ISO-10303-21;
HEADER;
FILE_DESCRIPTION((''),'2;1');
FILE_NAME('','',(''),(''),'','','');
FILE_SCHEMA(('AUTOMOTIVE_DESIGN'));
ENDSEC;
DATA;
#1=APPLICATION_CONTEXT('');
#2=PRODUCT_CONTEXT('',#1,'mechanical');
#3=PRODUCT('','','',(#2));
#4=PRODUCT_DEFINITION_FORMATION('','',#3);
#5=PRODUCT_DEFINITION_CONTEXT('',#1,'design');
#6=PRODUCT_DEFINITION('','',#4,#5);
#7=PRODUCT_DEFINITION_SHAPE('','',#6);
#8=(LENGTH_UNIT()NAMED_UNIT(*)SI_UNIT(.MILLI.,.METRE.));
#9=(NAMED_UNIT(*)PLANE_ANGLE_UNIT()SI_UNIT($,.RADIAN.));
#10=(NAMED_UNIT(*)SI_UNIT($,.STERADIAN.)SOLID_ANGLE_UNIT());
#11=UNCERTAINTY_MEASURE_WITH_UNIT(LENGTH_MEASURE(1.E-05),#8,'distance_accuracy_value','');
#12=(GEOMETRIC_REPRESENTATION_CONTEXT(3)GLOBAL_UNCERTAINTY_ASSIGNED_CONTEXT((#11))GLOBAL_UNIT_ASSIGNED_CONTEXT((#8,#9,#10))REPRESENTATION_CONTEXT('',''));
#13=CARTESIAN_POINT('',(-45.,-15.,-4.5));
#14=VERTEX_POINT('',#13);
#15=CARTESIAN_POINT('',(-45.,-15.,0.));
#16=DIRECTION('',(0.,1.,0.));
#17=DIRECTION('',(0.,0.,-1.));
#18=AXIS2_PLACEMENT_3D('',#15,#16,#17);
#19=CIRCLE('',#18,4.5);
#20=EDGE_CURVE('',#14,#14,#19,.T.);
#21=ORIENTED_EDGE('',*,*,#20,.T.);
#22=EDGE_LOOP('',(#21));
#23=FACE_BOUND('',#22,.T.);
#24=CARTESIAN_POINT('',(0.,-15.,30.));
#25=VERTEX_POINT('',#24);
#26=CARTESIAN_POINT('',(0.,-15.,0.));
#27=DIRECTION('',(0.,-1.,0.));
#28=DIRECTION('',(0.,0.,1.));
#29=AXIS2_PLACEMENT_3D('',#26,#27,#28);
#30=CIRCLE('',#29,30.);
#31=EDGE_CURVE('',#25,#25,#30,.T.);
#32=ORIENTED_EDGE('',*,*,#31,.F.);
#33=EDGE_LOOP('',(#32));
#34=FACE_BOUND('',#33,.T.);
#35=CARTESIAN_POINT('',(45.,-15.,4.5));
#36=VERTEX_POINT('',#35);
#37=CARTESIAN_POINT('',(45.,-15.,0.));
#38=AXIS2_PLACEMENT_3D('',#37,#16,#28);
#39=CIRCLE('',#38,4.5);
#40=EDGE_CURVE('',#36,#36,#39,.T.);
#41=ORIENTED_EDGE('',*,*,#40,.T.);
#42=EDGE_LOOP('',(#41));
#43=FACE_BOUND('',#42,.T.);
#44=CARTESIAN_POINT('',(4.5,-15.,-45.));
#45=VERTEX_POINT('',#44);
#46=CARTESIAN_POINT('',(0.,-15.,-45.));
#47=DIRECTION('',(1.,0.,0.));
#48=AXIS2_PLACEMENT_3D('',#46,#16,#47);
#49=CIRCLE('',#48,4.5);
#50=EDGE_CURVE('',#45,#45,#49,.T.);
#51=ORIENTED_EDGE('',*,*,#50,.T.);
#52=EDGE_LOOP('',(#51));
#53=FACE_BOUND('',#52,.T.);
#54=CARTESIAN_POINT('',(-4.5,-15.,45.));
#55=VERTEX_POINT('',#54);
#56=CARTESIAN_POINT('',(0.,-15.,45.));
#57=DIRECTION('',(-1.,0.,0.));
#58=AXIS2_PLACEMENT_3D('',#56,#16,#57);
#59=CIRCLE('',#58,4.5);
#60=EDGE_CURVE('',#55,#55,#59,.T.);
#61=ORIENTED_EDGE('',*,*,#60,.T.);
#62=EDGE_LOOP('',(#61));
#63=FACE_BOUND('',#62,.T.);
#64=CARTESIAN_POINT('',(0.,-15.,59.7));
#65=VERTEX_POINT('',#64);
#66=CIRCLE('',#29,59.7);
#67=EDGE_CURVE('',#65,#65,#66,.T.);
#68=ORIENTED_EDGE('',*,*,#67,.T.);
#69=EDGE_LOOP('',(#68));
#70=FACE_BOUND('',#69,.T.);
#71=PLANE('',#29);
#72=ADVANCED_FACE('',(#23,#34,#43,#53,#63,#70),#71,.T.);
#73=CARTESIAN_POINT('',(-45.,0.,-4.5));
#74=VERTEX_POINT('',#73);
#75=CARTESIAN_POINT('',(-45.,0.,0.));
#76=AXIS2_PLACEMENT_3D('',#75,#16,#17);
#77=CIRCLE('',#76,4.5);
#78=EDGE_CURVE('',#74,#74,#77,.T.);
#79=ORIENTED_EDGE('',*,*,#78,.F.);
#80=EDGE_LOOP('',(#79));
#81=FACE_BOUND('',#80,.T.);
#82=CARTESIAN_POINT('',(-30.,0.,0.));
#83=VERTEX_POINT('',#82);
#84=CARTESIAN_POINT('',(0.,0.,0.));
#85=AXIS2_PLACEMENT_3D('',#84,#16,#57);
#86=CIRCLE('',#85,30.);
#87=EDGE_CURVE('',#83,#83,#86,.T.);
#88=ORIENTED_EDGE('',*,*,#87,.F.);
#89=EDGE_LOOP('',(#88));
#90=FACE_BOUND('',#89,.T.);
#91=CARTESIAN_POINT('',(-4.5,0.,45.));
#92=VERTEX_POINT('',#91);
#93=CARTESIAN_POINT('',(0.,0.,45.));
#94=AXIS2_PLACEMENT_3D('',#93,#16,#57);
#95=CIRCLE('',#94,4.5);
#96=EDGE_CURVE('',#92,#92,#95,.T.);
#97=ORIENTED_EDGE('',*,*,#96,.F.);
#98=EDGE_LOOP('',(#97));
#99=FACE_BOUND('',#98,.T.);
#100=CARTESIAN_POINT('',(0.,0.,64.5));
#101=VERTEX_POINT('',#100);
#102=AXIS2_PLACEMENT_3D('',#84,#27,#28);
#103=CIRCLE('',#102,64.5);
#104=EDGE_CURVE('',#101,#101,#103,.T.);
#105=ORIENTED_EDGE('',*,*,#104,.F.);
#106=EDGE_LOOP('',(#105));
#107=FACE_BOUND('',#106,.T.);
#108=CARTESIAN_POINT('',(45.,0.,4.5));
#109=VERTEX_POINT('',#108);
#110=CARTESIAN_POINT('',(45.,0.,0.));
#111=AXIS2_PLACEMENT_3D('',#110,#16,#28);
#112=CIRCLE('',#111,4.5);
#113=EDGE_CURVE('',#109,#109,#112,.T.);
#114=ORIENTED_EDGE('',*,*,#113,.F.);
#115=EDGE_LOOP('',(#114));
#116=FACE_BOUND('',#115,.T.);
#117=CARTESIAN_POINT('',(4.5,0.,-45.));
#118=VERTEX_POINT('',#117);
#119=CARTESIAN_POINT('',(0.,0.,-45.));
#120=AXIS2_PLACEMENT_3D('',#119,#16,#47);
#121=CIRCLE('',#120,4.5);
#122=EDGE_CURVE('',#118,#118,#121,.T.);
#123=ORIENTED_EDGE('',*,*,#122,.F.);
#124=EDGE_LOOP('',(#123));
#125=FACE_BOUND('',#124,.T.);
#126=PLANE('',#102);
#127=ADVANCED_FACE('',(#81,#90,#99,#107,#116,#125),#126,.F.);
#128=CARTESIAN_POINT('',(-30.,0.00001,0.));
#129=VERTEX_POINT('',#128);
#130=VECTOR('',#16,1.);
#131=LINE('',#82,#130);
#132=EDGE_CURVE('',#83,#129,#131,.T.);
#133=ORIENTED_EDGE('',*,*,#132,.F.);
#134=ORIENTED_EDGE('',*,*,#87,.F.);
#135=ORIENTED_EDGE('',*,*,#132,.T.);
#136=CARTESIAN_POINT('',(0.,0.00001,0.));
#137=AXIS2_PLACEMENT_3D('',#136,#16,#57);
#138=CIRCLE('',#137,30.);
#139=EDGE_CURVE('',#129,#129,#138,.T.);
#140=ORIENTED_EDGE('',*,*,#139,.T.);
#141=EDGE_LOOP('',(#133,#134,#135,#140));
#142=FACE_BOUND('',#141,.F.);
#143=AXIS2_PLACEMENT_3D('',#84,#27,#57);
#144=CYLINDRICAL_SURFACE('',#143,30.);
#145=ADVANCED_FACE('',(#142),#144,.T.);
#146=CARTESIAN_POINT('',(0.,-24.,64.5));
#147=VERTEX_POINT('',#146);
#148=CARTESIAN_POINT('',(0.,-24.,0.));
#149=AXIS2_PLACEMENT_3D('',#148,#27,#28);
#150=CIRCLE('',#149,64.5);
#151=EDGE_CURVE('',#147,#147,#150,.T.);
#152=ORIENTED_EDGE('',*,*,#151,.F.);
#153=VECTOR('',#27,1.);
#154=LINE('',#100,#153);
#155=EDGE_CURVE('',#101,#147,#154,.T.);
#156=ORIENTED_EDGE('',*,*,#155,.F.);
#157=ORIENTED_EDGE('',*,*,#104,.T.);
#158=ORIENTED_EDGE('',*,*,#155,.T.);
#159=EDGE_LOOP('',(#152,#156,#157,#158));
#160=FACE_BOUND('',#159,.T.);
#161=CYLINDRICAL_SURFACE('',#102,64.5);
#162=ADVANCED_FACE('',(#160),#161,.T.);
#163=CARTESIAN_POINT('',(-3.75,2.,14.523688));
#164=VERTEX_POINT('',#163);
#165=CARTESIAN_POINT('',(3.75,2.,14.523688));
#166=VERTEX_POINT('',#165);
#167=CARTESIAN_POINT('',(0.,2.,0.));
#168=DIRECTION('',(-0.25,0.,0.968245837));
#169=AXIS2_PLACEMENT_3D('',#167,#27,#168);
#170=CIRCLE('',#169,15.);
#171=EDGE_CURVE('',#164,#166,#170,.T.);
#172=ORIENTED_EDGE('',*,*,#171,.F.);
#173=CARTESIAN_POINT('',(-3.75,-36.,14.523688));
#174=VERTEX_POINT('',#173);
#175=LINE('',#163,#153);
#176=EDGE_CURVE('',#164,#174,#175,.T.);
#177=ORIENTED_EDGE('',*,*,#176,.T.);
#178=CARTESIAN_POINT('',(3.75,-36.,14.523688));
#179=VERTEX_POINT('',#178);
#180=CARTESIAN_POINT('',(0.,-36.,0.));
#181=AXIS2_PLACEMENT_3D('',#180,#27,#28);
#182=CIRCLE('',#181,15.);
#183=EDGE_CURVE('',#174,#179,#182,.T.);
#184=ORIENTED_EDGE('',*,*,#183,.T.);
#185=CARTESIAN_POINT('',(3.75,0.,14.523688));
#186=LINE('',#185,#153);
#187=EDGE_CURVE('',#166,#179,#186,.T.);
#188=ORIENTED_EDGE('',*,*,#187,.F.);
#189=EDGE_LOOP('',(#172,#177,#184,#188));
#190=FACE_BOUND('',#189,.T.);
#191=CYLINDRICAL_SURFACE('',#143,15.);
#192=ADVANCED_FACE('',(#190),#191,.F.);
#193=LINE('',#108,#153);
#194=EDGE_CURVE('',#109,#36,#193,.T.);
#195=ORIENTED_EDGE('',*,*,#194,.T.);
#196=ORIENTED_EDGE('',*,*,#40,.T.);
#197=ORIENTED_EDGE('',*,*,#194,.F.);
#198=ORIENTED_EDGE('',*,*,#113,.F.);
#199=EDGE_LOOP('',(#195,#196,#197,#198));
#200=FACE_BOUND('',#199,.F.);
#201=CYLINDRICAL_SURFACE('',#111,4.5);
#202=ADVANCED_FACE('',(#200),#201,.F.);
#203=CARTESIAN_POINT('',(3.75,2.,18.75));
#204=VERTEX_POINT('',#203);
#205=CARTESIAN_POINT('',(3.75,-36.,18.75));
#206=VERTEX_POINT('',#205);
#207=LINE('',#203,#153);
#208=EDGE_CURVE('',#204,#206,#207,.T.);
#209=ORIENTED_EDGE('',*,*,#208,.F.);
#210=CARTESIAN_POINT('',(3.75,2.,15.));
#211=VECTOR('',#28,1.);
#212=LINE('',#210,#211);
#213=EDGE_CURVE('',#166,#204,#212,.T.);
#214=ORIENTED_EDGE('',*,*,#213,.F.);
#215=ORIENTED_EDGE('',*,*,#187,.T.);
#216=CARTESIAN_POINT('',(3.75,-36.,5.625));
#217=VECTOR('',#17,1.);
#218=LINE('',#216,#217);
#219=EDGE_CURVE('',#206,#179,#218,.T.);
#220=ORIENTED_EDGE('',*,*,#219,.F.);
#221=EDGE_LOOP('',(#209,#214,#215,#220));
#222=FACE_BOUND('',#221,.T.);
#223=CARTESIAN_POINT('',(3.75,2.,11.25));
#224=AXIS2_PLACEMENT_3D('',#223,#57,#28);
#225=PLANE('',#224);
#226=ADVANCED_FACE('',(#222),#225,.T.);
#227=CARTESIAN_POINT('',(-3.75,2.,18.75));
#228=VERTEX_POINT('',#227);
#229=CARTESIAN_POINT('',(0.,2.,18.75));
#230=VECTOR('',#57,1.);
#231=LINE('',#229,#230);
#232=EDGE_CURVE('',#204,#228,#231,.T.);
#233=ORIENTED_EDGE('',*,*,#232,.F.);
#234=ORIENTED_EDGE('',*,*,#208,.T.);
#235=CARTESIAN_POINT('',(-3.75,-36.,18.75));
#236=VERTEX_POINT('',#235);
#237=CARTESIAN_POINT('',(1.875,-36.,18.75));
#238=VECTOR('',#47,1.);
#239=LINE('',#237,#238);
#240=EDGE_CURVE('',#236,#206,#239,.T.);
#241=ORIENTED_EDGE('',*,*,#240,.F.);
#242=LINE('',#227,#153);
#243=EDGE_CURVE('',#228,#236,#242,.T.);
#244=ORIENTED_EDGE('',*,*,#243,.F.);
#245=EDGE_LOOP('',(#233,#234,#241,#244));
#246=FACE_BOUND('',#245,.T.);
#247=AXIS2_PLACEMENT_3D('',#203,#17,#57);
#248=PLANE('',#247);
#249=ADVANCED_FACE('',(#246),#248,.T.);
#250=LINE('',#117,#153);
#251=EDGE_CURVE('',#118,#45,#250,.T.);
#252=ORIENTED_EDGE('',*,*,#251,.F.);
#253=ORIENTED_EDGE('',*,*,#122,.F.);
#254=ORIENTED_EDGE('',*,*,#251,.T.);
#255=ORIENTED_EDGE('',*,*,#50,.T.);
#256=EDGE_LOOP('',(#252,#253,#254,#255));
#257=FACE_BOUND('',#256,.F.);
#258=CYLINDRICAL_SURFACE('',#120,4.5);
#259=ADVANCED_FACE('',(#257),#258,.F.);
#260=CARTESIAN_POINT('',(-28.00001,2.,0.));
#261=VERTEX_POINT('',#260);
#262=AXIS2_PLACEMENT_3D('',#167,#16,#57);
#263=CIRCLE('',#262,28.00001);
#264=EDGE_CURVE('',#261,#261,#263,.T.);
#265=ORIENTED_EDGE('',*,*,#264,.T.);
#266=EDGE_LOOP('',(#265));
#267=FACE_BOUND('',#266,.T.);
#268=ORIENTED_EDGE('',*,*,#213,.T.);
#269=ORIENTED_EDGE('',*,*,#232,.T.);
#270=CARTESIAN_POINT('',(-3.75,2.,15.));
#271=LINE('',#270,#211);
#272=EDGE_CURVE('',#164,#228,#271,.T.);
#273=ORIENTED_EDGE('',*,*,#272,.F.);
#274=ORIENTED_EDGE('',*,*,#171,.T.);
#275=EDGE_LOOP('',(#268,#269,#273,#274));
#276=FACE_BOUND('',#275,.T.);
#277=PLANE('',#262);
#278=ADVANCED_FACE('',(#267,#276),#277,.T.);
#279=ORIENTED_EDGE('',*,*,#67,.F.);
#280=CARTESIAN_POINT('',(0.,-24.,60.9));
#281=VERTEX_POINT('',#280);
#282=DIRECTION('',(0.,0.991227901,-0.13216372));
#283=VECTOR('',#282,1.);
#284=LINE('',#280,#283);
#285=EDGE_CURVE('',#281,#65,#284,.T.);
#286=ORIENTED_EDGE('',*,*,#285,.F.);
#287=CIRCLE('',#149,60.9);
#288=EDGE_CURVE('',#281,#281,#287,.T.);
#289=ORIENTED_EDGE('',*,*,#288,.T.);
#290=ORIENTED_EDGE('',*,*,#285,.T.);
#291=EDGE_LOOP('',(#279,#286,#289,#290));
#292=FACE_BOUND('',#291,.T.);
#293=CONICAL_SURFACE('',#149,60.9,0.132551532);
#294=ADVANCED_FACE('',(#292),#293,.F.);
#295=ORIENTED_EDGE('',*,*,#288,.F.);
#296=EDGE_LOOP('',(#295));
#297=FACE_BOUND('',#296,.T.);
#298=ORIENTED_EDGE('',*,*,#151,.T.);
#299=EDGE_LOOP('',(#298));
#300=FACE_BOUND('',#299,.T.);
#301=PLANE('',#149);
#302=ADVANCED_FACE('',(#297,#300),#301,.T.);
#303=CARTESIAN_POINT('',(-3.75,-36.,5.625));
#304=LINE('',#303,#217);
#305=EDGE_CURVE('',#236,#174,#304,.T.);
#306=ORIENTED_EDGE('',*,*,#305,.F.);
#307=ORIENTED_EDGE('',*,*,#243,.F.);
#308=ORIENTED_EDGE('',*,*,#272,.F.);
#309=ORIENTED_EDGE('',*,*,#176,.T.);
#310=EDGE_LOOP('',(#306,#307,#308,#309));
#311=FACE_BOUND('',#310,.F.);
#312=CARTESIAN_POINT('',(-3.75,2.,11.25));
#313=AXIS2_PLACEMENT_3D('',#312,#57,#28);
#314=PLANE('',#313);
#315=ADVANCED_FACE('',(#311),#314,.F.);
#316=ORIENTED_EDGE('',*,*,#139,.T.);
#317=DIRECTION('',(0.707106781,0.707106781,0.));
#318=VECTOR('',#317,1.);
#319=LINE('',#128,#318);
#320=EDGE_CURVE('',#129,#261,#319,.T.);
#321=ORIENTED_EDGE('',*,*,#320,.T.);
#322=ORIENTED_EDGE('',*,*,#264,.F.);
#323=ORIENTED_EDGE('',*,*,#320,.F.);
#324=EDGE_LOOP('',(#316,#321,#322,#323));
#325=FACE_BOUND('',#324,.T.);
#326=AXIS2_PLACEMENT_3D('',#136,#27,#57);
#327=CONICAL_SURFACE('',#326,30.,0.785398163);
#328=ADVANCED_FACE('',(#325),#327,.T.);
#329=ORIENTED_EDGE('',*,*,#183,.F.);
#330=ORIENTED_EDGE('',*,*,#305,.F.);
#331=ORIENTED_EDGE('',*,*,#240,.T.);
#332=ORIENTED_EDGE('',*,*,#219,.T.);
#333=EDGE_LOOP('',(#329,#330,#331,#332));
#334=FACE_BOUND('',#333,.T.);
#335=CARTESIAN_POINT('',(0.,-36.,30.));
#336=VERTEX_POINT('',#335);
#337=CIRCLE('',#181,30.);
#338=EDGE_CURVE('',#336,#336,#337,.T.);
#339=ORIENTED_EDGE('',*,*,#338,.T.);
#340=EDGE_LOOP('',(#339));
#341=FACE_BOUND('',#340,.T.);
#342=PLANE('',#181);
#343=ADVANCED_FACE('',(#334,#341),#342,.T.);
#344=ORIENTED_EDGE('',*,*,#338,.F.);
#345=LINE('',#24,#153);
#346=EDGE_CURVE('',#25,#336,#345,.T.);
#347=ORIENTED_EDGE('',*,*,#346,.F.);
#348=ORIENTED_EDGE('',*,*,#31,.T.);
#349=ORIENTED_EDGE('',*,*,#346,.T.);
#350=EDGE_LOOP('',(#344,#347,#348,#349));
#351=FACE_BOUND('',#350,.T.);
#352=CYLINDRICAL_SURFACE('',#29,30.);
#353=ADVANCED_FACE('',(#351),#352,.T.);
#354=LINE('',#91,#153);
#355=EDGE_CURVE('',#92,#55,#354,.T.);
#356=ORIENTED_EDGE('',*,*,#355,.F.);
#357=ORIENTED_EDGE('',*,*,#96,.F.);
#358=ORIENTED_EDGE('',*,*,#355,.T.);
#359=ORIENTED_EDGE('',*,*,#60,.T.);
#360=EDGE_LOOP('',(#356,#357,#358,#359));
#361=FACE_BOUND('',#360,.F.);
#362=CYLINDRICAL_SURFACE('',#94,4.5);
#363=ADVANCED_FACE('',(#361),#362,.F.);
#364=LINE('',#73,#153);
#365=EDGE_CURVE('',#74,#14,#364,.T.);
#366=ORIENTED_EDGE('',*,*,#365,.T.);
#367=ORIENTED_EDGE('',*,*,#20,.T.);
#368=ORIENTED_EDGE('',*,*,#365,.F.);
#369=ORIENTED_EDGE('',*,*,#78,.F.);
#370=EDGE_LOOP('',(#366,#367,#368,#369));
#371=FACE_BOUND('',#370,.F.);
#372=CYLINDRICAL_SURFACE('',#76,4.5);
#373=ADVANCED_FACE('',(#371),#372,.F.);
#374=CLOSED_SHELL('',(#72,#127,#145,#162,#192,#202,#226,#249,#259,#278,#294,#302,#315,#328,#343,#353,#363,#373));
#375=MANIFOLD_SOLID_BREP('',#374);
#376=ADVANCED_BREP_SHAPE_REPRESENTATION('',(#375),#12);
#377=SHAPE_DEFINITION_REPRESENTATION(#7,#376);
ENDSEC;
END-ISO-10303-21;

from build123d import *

# Parameters (mm, degrees)
F2_R     = 30
F2_R_2   = 15
F3_DEPTH = 2
F4_SIZE  = 1.99999
F5_R     = 4.5
F6_DEPTH = 25
F7_COUNT = 4
F8_W     = 7.5
F8_H     = 7.5
F9_DEPTH = 50


# Not quite as in the source:
# - a fillet or chamfer is up to 0.001 mm smaller than in the source, because OpenCascade refuses the exact size


with BuildPart() as f1:
    # F0 (on Right) → F1 (revolve)
    with BuildSketch(Plane.YZ):
        Polygon((0, 15), (0, 64.5), (-24, 64.5), (-24, 60.9), (-15, 59.7), (-15, 30), (-36, 30), (-36, 15), align=None)
    revolve(axis=Axis((0, -28.2661654055, 0), (0, -1, 0)))

    # F2 (on face) → F3 (join)
    with BuildSketch(Plane(origin=(0, 0, 0), x_dir=(-1, 0, 0), z_dir=(0, 1, 0))):
        Circle(F2_R)
        Circle(F2_R_2, mode=Mode.SUBTRACT)
    extrude(amount=F3_DEPTH)

    # F4 (size 2 in the source; OpenCascade refuses exactly that, so slightly less here)
    f4_edges = [f1.edges().sort_by_distance(p)[0] for p in [
        (30, 2, 0),
    ]]
    chamfer(f4_edges, length=F4_SIZE)

    # F5 (on face) → F6 (cut)
    with BuildSketch(Plane(origin=(0, 0, 0), x_dir=(-1, 0, 0), z_dir=(0, 1, 0))):
        with Locations((0, 45)):
            Circle(F5_R)
    f6 = extrude(amount=-F6_DEPTH, mode=Mode.SUBTRACT)

    # F7: F6 ×4 about axis
    f7_axis = Axis((0, 2, 0), (0, 1, 0))
    for i in range(1, F7_COUNT):
        add(f6.rotate(f7_axis, i * 360 / F7_COUNT), mode=Mode.SUBTRACT)

    # F8 (on face) → F9 (cut)
    with BuildSketch(Plane(origin=(0, 2, 0), x_dir=(-1, 0, 0), z_dir=(0, 1, 0))):
        with Locations((0, 15)):
            Rectangle(F8_W, F8_H)
    extrude(amount=-F9_DEPTH, mode=Mode.SUBTRACT)


solid = f1.part
